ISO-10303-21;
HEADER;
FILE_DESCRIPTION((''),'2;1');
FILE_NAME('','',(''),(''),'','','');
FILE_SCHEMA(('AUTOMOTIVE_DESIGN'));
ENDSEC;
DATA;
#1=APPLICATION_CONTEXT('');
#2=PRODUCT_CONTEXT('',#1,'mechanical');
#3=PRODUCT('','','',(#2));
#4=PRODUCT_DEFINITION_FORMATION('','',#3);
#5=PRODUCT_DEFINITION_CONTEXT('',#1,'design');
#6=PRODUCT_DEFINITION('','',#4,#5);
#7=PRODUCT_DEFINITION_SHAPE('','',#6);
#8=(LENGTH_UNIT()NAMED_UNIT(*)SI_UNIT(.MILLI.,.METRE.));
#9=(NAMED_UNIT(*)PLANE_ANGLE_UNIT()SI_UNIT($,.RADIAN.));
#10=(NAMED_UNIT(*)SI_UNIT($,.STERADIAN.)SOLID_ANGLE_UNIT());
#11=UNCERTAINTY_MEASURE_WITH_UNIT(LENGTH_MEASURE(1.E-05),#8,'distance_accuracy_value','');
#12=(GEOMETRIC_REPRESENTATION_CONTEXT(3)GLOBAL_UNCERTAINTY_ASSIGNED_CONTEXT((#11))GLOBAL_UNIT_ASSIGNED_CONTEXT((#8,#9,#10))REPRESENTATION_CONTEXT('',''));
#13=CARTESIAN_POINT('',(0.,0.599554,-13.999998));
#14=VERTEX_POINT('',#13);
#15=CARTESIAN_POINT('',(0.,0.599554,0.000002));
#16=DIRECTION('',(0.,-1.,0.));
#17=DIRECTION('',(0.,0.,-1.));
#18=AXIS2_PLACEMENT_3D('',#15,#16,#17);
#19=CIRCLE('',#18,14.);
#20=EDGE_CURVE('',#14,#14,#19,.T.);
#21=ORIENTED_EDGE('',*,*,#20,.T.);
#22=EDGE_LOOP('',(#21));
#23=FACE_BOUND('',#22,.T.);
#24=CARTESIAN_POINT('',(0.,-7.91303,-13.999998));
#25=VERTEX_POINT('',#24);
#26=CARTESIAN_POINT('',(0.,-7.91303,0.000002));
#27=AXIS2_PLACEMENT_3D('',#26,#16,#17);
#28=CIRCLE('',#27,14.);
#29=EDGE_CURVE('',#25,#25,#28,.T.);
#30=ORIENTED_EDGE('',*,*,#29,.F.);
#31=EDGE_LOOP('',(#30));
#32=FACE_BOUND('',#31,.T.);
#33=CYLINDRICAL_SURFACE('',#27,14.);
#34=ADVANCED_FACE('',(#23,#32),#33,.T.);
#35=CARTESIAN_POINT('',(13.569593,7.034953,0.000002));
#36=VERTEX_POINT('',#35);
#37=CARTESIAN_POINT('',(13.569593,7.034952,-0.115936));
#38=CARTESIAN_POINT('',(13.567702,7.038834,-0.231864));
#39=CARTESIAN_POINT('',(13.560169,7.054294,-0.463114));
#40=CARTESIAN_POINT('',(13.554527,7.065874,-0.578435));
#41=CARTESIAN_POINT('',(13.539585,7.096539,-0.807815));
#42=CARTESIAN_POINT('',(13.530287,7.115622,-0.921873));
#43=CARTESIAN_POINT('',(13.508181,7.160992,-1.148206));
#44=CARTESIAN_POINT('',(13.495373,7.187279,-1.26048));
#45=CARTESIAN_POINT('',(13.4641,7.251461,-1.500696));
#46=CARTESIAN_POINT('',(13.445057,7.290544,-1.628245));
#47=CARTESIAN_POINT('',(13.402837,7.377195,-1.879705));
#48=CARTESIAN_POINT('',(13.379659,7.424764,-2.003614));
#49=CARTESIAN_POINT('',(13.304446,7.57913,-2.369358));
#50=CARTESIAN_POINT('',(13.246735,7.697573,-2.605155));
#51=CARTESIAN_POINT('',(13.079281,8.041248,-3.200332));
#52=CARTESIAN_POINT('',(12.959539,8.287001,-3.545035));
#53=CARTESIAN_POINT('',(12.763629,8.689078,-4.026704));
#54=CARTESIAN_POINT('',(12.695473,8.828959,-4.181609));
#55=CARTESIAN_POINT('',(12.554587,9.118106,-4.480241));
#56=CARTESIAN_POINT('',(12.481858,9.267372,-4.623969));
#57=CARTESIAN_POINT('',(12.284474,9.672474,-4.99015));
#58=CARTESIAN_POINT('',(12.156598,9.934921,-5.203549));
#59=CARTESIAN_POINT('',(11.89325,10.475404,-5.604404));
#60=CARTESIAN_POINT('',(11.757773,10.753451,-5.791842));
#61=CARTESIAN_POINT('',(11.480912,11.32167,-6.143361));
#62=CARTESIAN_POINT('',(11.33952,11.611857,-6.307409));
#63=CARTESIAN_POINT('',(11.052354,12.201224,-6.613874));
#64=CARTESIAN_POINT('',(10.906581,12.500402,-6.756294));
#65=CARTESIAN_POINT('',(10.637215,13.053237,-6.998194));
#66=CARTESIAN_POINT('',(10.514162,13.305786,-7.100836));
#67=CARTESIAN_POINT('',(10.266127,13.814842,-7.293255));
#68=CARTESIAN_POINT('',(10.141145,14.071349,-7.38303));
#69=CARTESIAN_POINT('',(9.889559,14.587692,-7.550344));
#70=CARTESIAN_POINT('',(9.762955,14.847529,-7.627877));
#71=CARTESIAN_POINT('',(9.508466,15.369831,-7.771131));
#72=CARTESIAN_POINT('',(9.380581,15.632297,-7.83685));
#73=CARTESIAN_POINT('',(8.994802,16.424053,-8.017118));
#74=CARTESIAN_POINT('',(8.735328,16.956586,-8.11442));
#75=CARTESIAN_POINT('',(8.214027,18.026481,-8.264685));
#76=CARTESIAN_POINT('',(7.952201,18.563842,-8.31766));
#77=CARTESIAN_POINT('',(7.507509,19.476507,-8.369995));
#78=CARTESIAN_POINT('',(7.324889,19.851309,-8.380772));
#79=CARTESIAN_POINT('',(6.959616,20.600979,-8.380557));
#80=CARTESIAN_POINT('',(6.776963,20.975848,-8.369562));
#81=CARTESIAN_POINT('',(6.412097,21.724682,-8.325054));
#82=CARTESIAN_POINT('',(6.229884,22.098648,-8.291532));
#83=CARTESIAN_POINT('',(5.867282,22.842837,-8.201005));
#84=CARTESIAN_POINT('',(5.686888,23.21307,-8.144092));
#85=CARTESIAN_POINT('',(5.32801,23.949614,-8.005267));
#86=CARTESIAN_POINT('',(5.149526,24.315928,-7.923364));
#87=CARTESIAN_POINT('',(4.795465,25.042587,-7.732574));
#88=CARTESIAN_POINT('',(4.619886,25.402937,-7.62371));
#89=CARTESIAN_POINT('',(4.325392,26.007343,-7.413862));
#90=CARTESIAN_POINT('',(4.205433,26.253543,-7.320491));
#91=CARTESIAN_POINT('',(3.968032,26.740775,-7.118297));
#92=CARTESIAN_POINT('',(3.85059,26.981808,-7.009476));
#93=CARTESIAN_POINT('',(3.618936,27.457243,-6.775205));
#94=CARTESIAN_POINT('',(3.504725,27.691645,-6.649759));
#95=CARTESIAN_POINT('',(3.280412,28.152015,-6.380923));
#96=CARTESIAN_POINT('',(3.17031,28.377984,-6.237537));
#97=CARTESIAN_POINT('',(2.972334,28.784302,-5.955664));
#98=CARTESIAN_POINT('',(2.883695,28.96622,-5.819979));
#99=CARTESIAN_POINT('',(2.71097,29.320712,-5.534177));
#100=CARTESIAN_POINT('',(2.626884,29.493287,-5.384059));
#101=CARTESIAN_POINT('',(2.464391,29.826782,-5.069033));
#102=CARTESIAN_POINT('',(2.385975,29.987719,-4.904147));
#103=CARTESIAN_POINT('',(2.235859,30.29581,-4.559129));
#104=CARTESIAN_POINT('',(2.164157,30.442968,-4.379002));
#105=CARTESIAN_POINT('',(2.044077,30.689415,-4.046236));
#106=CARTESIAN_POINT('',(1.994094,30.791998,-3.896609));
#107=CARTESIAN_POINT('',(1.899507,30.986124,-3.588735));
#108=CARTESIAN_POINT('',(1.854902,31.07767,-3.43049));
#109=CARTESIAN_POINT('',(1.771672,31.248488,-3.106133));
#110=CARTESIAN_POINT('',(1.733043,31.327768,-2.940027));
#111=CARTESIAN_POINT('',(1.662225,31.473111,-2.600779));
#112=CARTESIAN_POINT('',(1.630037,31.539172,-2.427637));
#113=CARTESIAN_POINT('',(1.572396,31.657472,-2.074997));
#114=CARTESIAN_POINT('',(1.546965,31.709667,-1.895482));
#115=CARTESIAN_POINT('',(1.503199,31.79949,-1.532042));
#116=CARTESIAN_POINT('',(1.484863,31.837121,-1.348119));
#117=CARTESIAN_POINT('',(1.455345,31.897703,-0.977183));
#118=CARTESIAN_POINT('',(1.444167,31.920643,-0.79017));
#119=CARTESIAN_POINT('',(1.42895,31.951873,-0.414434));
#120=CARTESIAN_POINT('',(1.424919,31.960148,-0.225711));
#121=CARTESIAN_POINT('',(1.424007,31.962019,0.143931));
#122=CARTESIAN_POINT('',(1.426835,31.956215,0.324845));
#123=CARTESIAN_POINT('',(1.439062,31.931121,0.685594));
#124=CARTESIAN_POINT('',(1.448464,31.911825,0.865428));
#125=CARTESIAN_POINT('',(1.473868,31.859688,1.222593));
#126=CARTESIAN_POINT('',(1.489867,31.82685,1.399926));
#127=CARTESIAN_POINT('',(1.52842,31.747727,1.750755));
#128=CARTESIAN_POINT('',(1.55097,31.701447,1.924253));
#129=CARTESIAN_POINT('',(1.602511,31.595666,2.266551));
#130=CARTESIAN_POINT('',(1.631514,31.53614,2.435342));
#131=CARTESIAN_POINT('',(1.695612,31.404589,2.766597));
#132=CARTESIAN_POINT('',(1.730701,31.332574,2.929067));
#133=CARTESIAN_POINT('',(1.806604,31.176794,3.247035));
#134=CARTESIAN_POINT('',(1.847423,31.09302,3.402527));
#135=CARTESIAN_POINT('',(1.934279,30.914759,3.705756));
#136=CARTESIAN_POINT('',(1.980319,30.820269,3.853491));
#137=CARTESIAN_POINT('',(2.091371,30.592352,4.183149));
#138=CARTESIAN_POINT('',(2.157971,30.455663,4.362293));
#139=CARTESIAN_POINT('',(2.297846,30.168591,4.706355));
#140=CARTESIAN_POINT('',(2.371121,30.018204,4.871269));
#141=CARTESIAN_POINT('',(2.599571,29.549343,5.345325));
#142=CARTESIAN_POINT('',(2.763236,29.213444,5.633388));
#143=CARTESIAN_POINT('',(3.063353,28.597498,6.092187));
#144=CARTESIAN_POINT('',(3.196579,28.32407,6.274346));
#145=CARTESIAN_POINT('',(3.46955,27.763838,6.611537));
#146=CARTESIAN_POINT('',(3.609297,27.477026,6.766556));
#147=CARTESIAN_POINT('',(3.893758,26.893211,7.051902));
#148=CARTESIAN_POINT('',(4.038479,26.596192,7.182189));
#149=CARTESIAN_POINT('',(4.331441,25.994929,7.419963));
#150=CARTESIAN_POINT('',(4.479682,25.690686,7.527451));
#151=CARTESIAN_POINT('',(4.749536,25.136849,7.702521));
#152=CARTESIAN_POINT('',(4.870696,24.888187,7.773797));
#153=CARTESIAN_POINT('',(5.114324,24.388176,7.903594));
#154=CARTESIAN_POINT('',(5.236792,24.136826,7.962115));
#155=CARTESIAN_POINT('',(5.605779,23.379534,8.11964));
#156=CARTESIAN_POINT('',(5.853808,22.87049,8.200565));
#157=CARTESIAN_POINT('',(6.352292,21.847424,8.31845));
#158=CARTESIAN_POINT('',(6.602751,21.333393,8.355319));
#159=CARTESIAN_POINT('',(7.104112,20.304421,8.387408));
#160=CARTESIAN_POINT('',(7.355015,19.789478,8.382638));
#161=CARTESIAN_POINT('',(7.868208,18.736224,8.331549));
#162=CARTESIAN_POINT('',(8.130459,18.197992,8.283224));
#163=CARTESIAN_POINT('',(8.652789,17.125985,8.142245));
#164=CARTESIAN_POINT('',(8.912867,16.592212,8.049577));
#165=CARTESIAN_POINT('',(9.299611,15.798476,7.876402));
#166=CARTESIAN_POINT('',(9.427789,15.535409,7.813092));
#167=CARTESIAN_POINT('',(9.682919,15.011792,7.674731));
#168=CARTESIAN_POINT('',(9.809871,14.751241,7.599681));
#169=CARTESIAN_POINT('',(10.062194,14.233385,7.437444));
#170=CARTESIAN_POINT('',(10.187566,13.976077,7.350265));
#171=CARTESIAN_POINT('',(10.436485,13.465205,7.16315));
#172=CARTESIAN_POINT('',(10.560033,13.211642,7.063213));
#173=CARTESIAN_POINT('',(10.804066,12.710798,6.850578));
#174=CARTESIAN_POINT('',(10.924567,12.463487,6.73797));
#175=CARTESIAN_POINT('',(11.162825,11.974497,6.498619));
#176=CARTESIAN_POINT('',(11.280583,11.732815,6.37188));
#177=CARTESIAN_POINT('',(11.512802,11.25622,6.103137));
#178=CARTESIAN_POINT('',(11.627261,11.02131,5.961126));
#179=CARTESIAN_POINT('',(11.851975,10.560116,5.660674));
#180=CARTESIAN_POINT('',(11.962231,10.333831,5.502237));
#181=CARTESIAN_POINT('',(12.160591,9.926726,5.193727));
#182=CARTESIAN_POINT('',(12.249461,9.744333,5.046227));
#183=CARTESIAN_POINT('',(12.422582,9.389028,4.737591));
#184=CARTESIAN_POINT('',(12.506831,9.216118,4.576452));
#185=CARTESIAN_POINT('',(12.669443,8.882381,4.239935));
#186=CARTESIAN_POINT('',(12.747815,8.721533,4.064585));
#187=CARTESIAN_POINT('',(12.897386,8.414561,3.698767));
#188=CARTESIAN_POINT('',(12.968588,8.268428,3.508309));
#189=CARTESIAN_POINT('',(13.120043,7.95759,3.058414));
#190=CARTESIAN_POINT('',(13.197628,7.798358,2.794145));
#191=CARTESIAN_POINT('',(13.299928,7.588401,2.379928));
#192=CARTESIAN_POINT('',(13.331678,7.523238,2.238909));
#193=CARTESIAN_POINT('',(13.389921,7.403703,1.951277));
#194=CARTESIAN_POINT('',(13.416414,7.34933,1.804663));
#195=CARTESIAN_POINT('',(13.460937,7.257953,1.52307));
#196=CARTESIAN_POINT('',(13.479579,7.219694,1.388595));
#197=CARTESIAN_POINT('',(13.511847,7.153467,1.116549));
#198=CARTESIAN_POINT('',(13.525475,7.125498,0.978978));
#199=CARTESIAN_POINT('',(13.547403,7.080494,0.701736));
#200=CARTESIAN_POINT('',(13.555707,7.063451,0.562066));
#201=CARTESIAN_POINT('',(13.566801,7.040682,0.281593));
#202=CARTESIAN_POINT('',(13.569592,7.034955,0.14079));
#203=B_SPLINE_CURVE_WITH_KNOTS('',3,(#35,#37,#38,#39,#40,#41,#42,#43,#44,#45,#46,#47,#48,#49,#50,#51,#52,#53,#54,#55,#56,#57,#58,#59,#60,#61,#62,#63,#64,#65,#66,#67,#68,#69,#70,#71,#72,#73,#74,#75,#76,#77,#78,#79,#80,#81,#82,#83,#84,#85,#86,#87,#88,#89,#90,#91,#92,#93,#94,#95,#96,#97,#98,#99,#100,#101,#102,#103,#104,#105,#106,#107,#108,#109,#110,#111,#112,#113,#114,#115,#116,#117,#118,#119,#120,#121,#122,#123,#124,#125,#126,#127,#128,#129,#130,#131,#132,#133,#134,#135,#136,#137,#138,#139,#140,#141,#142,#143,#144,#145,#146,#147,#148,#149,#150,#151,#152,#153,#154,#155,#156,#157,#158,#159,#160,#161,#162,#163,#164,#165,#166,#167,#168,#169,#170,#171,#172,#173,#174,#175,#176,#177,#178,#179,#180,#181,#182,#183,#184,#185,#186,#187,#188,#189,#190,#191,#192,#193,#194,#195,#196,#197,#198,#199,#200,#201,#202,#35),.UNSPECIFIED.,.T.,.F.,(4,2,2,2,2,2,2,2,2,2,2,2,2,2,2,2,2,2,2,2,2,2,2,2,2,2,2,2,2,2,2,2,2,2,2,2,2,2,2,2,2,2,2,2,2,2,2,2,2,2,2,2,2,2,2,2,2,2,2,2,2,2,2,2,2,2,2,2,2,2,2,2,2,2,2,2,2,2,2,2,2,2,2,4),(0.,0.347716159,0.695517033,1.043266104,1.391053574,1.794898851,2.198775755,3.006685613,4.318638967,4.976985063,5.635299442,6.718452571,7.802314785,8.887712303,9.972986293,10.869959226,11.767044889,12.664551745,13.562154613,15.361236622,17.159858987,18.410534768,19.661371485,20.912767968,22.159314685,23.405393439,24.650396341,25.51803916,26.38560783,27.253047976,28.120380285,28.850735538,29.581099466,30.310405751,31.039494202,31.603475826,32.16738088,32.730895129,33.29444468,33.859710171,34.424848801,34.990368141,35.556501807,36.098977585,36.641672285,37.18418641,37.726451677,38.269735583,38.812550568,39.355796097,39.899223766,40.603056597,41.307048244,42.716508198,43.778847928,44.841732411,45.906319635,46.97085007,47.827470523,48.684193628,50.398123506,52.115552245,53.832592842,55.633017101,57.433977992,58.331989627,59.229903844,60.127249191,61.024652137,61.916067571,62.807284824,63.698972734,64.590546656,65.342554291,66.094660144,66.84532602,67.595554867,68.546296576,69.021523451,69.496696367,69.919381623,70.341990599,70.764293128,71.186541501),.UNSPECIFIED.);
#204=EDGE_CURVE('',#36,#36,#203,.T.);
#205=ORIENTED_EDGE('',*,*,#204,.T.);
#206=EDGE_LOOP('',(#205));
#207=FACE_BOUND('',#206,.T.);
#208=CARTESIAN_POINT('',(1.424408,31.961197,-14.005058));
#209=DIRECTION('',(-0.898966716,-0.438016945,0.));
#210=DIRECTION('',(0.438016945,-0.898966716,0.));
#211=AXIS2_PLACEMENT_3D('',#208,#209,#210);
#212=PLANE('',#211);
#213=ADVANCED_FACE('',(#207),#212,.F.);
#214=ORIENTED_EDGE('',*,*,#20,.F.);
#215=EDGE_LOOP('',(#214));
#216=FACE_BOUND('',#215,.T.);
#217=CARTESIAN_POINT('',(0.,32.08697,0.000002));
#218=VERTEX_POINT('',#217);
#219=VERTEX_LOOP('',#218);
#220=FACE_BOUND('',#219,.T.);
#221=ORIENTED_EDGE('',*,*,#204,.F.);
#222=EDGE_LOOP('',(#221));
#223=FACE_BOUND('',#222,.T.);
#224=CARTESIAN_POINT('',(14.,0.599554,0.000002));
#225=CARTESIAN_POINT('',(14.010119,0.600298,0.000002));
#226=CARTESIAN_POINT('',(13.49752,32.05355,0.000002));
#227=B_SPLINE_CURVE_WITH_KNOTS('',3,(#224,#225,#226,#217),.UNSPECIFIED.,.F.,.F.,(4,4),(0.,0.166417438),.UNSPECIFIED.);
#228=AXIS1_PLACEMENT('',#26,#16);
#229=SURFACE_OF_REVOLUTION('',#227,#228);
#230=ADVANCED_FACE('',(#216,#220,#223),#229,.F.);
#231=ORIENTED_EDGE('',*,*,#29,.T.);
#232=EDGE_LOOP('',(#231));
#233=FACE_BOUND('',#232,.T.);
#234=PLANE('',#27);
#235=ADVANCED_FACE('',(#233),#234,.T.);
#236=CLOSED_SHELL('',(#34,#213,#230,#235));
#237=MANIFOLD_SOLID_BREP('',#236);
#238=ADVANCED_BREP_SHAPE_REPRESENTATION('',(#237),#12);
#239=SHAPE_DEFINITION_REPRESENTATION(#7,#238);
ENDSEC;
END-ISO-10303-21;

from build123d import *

# Parameters (mm, degrees)
SCALE2_SCALE           = 2
CUT_EXTRUDE1_START     = 15.280040905
CUT_EXTRUDE1_OUTLINE_W = 31
CUT_EXTRUDE1_OUTLINE_H = 20
CUT_EXTRUDE1_DEPTH     = 3.866864707


# Read off the part's stored shape, not the designer's step: Cut-Extrude1
with BuildPart() as part:
    # Sketch1 → Revolve1 (revolve)
    with BuildSketch(Plane.XY, mode=Mode.PRIVATE) as revolve1_sk:
        with BuildLine():
            Line((7, 4.256292026), (7, 0))
            Line((7, 0), (0, 0))
            Line((0, 0), (0, 20))
            add(Edge.make_bspline(
                [(0, 20), (6.748759859, 19.983290112), (7.005059619, 4.256663996), (7, 4.256292026)],
                knots=[0, 0, 0, 0, 0.166417438, 0.166417438, 0.166417438, 0.166417438], degree=3))
        make_face()
    revolve(revolve1_sk.sketch.rotate(Axis((0, 0, 0), (0, 1, 0)), 90), axis=Axis((0, 0, 0), (0, 1, 0)))


with BuildPart() as part_1:
    # Scale2: scaled about (0, 7.913014441, 0)
    add(part.part.scale(SCALE2_SCALE).moved(Location((0, -7.913014441, 0))))

    # Cut-Extrude1 outline → Cut-Extrude1 (cut)
    with BuildSketch(Plane(origin=(0, 0, 0), x_dir=(0.43801694528234036, -0.8989667155381935, 0), z_dir=(0.8989667155381934, 0.4380169452823407, 0)).offset(CUT_EXTRUDE1_START)):
        with Locations((-14.5, 0)):
            Rectangle(CUT_EXTRUDE1_OUTLINE_W, CUT_EXTRUDE1_OUTLINE_H)
    extrude(amount=CUT_EXTRUDE1_DEPTH, mode=Mode.SUBTRACT)


solid = part_1.part
